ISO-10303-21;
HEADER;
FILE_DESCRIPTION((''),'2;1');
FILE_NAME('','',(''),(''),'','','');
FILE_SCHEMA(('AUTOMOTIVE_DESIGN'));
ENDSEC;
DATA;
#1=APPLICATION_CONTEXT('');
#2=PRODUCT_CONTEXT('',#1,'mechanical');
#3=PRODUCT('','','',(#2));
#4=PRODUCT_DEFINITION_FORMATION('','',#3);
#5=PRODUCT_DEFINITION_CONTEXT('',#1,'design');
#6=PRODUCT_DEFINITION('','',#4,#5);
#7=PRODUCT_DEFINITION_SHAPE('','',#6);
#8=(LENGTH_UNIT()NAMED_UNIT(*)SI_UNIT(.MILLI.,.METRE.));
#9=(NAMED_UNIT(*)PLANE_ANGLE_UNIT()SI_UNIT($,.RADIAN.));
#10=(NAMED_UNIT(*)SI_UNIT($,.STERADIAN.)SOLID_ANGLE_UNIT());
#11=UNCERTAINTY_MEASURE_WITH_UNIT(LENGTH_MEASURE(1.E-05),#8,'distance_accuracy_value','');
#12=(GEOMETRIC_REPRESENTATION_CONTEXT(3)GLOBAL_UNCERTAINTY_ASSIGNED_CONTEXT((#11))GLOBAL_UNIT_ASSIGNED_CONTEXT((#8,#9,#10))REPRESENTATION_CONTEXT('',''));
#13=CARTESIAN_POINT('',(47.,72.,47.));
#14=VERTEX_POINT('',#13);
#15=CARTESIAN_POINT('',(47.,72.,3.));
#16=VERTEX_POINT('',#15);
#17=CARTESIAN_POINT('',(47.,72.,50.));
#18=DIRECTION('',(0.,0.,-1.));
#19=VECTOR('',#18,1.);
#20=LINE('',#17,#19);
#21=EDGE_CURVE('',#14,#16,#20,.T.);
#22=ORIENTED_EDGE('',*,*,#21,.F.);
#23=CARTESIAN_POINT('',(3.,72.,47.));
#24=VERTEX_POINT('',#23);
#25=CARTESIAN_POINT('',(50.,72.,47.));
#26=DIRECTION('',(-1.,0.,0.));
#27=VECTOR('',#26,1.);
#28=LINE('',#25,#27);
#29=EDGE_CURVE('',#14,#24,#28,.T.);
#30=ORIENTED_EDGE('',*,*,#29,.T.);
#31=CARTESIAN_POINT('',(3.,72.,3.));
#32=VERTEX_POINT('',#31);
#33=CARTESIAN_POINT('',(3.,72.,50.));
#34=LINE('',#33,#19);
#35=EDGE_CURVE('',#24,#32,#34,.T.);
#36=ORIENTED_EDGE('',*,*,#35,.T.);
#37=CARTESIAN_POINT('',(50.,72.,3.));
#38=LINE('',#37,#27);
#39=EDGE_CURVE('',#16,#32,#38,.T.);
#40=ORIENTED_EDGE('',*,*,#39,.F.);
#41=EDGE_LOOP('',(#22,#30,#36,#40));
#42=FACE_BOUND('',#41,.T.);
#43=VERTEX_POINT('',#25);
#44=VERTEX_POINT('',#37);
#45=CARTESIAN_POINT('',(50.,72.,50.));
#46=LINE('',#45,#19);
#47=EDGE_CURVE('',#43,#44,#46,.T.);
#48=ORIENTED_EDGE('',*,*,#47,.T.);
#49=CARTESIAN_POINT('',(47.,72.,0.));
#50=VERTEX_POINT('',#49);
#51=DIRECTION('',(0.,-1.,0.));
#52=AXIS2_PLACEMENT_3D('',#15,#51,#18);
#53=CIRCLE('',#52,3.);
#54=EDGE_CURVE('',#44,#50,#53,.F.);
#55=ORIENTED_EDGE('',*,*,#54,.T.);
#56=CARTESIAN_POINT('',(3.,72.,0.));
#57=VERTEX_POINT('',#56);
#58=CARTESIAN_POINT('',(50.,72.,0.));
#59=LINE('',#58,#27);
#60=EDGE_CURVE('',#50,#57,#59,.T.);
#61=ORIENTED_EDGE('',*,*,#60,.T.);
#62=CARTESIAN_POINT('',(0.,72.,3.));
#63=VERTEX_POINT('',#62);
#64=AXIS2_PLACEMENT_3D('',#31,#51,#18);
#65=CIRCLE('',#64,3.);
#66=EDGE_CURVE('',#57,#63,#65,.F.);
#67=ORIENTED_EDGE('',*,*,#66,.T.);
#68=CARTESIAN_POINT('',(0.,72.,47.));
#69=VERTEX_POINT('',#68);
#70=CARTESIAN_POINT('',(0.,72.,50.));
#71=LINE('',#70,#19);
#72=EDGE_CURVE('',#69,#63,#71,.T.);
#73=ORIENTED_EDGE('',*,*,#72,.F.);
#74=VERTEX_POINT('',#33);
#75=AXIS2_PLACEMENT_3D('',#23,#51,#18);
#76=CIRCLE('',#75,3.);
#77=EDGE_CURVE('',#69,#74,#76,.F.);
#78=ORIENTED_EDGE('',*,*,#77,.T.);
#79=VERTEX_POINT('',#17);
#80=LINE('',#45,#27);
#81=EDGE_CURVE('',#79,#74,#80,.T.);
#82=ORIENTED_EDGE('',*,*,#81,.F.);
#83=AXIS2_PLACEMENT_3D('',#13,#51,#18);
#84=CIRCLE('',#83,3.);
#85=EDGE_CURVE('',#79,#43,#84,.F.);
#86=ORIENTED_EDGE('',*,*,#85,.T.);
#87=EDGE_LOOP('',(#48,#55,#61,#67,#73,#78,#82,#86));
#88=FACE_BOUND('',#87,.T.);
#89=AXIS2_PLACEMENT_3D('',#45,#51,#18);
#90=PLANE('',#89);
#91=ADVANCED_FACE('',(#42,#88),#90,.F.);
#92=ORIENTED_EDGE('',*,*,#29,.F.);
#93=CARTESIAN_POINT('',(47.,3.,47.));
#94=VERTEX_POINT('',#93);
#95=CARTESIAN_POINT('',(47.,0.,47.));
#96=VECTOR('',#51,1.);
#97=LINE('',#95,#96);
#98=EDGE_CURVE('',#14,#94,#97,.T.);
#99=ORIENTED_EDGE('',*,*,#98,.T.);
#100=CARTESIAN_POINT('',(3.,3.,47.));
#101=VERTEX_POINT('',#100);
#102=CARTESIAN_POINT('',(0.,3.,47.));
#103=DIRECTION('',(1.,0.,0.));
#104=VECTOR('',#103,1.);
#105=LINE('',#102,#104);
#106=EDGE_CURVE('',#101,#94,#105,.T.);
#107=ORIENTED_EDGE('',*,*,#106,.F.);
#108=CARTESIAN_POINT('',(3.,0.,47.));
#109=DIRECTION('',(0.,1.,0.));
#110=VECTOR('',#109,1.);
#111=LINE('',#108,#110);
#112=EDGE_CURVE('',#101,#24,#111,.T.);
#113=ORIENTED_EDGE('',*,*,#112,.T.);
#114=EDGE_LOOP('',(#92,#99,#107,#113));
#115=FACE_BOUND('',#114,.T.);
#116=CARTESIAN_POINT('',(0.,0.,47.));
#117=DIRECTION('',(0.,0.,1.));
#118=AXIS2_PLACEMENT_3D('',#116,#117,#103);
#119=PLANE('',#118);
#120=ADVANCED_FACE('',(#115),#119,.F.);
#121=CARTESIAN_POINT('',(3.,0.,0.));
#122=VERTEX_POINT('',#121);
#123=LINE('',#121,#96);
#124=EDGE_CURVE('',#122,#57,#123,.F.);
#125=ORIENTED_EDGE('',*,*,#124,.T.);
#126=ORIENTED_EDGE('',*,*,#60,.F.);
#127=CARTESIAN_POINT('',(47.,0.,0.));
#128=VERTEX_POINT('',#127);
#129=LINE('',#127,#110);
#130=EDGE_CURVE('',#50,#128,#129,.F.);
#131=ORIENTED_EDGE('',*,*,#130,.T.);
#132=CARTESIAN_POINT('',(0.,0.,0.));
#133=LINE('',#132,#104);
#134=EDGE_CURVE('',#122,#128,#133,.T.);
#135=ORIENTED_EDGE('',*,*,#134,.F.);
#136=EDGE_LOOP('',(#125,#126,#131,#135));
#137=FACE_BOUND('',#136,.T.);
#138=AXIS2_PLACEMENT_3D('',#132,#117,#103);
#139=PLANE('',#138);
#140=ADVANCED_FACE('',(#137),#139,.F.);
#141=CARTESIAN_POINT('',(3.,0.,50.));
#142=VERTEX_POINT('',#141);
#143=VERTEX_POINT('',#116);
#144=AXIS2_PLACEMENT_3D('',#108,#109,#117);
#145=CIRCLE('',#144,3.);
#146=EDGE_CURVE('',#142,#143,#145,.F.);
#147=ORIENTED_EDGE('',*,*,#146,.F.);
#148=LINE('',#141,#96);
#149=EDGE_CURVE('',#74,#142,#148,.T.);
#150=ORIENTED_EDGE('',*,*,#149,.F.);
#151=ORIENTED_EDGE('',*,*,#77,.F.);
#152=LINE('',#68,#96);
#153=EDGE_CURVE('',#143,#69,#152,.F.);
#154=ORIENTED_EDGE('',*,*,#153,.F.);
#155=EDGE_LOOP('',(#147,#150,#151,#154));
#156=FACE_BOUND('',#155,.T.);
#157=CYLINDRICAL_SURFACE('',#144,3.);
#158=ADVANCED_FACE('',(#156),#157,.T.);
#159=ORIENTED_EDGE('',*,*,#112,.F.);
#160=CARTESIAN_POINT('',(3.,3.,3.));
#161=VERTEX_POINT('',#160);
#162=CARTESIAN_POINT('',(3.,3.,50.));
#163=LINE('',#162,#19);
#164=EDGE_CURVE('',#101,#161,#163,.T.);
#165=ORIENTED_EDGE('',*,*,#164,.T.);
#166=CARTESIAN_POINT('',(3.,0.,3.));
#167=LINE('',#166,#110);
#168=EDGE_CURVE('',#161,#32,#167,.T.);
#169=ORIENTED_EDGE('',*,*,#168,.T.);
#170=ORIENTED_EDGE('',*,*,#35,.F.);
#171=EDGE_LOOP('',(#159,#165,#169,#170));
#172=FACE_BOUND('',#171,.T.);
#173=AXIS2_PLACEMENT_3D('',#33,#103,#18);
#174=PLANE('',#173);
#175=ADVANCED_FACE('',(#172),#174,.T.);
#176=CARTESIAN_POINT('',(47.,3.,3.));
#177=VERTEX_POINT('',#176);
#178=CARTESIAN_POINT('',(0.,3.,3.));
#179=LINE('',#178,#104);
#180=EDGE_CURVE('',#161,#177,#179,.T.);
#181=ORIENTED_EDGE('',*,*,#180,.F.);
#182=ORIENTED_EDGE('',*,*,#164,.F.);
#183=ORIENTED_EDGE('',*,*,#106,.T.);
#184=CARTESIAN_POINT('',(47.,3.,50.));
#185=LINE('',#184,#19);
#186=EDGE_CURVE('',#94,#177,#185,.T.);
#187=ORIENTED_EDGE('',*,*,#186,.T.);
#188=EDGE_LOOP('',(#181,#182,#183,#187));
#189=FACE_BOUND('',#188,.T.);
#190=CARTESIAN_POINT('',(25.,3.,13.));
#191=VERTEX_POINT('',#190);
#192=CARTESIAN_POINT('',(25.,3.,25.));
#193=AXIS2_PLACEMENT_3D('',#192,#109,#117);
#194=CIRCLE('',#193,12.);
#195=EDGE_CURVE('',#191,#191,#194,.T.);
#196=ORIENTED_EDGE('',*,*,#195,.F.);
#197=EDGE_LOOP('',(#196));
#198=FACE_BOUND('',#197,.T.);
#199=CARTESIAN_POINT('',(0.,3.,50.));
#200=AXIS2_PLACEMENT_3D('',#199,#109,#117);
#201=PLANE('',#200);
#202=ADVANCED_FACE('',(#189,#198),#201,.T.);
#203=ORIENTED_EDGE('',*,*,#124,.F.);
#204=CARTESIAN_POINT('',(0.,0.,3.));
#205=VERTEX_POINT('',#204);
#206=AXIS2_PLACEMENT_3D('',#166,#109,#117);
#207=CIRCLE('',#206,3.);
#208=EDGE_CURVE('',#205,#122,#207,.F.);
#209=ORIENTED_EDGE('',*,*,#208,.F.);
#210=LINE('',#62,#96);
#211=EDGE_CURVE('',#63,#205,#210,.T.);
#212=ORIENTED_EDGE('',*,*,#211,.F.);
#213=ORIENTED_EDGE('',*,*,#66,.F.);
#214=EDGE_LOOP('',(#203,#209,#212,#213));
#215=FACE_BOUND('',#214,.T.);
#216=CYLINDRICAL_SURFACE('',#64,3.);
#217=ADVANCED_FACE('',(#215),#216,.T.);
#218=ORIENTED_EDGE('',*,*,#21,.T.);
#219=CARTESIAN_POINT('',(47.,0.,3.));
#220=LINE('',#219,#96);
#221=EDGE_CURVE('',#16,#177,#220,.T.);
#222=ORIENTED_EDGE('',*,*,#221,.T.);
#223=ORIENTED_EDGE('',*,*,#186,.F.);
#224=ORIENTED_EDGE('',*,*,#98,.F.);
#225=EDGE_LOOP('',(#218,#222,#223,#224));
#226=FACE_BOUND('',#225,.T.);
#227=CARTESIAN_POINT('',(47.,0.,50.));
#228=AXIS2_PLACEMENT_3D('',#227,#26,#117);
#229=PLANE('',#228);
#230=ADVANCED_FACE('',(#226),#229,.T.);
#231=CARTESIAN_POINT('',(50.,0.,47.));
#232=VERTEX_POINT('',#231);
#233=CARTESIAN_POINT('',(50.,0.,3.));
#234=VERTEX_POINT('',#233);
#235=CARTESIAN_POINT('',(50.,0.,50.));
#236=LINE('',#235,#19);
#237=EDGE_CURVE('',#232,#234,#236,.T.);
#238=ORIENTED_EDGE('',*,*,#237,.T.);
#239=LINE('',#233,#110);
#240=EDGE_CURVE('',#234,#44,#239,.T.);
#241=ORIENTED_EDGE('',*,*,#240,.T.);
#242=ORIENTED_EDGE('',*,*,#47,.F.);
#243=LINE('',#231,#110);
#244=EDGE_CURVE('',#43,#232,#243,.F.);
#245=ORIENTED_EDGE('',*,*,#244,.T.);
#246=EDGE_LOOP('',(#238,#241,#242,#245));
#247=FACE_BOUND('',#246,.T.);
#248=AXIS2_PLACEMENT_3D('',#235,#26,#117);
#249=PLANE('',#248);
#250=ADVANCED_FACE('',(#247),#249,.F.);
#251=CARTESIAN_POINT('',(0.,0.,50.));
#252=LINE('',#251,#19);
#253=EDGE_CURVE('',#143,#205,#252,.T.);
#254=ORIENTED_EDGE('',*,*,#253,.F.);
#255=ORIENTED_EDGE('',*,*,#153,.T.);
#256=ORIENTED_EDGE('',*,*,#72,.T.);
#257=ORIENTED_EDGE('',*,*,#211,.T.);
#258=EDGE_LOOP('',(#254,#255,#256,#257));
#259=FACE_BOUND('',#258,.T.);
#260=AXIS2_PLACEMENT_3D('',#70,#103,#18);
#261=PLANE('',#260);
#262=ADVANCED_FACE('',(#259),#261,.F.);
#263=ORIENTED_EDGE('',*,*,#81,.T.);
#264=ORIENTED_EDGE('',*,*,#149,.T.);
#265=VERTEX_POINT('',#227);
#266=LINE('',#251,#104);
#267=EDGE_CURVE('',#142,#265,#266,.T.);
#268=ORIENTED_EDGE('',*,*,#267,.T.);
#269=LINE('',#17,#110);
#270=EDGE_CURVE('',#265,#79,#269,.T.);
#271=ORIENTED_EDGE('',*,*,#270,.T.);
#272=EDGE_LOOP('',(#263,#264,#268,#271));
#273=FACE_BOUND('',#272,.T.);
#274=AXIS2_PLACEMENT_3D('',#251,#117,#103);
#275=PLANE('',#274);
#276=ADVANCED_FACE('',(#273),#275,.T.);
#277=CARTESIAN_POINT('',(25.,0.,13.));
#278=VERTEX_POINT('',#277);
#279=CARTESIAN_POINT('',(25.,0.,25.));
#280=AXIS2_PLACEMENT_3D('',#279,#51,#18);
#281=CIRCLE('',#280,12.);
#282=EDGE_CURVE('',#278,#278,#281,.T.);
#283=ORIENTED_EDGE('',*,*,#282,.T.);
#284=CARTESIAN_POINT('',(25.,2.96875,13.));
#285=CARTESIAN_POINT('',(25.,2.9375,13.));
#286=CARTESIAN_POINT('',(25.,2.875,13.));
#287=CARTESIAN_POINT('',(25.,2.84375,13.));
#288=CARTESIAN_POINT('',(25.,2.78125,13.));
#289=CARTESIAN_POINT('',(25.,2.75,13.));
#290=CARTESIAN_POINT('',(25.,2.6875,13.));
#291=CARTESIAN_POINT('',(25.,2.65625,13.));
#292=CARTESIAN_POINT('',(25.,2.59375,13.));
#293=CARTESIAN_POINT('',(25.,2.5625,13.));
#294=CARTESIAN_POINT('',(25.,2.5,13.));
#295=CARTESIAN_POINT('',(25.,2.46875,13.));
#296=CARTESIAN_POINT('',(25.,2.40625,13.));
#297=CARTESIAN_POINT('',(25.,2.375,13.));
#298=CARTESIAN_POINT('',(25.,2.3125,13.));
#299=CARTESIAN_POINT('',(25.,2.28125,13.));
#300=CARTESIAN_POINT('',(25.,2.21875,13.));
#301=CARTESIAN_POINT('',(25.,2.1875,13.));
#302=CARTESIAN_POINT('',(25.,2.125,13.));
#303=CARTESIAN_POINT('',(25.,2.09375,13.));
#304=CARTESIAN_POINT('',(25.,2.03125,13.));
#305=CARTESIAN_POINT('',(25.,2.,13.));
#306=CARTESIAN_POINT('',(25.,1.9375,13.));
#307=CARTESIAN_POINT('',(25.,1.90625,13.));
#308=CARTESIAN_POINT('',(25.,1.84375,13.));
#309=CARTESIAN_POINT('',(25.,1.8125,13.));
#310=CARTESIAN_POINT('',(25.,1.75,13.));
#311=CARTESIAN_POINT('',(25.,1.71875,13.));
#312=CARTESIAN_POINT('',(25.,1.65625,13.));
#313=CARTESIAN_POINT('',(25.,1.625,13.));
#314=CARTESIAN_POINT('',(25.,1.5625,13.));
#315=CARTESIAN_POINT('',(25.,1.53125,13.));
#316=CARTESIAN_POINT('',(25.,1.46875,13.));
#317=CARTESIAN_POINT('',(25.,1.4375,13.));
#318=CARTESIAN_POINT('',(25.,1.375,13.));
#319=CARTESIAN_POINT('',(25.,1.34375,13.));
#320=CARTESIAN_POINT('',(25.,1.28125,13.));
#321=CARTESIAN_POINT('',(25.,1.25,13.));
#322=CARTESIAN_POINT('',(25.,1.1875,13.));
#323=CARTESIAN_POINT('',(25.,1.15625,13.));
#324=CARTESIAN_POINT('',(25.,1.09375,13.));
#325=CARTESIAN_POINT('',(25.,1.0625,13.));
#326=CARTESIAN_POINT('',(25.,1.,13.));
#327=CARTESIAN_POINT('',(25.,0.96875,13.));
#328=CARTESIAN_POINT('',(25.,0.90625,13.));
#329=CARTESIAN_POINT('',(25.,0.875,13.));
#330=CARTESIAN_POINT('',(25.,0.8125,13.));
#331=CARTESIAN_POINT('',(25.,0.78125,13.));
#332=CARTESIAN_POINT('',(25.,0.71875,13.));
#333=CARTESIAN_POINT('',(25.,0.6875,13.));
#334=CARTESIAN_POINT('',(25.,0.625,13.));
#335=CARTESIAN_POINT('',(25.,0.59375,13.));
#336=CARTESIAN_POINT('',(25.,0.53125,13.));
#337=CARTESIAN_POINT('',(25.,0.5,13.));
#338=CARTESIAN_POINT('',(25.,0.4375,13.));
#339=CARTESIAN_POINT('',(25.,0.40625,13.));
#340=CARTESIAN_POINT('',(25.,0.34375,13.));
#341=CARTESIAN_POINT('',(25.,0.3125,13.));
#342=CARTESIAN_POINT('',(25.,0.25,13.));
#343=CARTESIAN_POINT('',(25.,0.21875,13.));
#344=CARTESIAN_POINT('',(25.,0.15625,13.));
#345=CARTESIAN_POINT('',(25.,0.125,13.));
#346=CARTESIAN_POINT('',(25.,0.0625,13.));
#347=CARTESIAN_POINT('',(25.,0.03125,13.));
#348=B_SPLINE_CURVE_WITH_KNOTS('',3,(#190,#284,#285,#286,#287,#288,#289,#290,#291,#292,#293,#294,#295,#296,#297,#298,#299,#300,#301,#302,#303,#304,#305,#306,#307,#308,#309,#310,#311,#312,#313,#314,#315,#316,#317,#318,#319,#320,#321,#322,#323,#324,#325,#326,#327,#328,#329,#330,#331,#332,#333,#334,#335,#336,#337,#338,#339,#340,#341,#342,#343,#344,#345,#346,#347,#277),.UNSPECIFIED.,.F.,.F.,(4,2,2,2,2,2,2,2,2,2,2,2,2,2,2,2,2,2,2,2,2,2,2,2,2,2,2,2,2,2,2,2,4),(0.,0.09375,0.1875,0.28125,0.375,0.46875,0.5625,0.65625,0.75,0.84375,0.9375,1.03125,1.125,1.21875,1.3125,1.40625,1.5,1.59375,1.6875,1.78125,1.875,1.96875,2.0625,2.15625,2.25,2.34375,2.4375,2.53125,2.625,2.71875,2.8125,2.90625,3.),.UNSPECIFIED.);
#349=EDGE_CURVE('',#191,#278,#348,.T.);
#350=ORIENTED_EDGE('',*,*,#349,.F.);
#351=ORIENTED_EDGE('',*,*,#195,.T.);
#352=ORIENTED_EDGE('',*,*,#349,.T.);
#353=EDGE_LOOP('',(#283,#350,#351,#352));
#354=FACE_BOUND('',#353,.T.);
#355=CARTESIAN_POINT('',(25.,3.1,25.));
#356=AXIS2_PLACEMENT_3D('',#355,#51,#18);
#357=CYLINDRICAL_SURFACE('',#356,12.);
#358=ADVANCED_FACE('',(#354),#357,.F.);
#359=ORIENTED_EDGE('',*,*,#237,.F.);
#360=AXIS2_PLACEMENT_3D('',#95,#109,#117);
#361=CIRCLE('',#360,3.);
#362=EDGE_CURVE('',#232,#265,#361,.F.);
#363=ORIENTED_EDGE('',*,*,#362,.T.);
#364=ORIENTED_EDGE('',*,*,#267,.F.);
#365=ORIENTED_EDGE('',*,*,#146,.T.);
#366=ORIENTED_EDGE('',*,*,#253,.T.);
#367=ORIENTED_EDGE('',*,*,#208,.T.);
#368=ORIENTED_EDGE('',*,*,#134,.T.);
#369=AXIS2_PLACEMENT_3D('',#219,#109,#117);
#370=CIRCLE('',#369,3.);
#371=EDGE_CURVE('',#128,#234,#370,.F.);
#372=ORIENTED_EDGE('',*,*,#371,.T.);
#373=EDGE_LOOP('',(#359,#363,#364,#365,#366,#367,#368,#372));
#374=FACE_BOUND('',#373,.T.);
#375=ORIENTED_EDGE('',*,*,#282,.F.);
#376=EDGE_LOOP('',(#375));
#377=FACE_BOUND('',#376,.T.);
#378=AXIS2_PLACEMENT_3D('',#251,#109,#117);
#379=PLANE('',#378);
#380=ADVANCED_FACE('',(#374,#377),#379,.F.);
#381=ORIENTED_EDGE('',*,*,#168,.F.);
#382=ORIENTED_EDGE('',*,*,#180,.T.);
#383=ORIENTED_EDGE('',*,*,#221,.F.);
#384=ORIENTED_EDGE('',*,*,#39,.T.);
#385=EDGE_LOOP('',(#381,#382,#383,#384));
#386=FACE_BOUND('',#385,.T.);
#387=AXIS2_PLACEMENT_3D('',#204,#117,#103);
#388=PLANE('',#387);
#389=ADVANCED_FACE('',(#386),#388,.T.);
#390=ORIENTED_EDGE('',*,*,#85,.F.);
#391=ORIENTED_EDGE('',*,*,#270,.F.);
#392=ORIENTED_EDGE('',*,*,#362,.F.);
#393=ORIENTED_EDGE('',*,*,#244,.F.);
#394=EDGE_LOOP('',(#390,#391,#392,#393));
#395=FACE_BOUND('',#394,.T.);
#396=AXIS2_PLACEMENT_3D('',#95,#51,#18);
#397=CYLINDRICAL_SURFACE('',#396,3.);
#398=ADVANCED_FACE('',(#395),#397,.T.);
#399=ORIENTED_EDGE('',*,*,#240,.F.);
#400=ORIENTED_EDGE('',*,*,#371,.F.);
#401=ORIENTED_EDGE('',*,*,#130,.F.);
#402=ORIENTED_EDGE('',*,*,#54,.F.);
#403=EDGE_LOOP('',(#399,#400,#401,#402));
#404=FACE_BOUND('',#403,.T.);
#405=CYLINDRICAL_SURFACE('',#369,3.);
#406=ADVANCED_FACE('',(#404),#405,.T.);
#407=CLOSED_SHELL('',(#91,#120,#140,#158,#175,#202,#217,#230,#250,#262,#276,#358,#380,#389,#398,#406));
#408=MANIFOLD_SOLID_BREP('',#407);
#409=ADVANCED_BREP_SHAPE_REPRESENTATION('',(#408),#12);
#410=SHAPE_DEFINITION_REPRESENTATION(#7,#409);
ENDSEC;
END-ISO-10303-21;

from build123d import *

# Parameters (mm, degrees)
SKETCH_1_W              = 50
SKETCH_1_H              = 72
STEPPER_COVER_DEPTH     = 50
FILLET_2_R              = 3
SHELL_START             = 3
SHELL_1_OUTLINE_W       = 69
SHELL_1_OUTLINE_H       = 44
SHELL_1_DEPTH           = 44
SKETCH_2_R              = 12
COUPLER_CLEARANCE_DEPTH = 3.1


# Read off the part's stored shape, not the designer's step: 抽壳1
with BuildPart() as part:
    # 草图1 → Stepper_cover (new body)
    with BuildSketch(Plane.XY):
        with Locations((25, 36)):
            Rectangle(SKETCH_1_W, SKETCH_1_H)
    extrude(amount=STEPPER_COVER_DEPTH)

    # Fillet 2
    fillet_2_edges = [part.edges().sort_by_distance(p)[0] for p in [
        (50, 36, 50),
        (0, 36, 50),
        (50, 36, 0),
        (0, 36, 0),
    ]]
    fillet(fillet_2_edges, radius=FILLET_2_R)

    # 抽壳1 outline → 抽壳1 (cut)
    with BuildSketch(Plane.YZ.offset(SHELL_START)):
        with Locations((37.5, 25)):
            Rectangle(SHELL_1_OUTLINE_W, SHELL_1_OUTLINE_H)
    extrude(amount=SHELL_1_DEPTH, mode=Mode.SUBTRACT)

    # 草图2 → Coupler_clearance (cut)
    with BuildSketch(Plane.XZ):
        with Locations(Location((25, 25, 0), (0, 0, 270))):
            Circle(SKETCH_2_R)
    extrude(amount=-COUPLER_CLEARANCE_DEPTH, mode=Mode.SUBTRACT)


solid = part.part
